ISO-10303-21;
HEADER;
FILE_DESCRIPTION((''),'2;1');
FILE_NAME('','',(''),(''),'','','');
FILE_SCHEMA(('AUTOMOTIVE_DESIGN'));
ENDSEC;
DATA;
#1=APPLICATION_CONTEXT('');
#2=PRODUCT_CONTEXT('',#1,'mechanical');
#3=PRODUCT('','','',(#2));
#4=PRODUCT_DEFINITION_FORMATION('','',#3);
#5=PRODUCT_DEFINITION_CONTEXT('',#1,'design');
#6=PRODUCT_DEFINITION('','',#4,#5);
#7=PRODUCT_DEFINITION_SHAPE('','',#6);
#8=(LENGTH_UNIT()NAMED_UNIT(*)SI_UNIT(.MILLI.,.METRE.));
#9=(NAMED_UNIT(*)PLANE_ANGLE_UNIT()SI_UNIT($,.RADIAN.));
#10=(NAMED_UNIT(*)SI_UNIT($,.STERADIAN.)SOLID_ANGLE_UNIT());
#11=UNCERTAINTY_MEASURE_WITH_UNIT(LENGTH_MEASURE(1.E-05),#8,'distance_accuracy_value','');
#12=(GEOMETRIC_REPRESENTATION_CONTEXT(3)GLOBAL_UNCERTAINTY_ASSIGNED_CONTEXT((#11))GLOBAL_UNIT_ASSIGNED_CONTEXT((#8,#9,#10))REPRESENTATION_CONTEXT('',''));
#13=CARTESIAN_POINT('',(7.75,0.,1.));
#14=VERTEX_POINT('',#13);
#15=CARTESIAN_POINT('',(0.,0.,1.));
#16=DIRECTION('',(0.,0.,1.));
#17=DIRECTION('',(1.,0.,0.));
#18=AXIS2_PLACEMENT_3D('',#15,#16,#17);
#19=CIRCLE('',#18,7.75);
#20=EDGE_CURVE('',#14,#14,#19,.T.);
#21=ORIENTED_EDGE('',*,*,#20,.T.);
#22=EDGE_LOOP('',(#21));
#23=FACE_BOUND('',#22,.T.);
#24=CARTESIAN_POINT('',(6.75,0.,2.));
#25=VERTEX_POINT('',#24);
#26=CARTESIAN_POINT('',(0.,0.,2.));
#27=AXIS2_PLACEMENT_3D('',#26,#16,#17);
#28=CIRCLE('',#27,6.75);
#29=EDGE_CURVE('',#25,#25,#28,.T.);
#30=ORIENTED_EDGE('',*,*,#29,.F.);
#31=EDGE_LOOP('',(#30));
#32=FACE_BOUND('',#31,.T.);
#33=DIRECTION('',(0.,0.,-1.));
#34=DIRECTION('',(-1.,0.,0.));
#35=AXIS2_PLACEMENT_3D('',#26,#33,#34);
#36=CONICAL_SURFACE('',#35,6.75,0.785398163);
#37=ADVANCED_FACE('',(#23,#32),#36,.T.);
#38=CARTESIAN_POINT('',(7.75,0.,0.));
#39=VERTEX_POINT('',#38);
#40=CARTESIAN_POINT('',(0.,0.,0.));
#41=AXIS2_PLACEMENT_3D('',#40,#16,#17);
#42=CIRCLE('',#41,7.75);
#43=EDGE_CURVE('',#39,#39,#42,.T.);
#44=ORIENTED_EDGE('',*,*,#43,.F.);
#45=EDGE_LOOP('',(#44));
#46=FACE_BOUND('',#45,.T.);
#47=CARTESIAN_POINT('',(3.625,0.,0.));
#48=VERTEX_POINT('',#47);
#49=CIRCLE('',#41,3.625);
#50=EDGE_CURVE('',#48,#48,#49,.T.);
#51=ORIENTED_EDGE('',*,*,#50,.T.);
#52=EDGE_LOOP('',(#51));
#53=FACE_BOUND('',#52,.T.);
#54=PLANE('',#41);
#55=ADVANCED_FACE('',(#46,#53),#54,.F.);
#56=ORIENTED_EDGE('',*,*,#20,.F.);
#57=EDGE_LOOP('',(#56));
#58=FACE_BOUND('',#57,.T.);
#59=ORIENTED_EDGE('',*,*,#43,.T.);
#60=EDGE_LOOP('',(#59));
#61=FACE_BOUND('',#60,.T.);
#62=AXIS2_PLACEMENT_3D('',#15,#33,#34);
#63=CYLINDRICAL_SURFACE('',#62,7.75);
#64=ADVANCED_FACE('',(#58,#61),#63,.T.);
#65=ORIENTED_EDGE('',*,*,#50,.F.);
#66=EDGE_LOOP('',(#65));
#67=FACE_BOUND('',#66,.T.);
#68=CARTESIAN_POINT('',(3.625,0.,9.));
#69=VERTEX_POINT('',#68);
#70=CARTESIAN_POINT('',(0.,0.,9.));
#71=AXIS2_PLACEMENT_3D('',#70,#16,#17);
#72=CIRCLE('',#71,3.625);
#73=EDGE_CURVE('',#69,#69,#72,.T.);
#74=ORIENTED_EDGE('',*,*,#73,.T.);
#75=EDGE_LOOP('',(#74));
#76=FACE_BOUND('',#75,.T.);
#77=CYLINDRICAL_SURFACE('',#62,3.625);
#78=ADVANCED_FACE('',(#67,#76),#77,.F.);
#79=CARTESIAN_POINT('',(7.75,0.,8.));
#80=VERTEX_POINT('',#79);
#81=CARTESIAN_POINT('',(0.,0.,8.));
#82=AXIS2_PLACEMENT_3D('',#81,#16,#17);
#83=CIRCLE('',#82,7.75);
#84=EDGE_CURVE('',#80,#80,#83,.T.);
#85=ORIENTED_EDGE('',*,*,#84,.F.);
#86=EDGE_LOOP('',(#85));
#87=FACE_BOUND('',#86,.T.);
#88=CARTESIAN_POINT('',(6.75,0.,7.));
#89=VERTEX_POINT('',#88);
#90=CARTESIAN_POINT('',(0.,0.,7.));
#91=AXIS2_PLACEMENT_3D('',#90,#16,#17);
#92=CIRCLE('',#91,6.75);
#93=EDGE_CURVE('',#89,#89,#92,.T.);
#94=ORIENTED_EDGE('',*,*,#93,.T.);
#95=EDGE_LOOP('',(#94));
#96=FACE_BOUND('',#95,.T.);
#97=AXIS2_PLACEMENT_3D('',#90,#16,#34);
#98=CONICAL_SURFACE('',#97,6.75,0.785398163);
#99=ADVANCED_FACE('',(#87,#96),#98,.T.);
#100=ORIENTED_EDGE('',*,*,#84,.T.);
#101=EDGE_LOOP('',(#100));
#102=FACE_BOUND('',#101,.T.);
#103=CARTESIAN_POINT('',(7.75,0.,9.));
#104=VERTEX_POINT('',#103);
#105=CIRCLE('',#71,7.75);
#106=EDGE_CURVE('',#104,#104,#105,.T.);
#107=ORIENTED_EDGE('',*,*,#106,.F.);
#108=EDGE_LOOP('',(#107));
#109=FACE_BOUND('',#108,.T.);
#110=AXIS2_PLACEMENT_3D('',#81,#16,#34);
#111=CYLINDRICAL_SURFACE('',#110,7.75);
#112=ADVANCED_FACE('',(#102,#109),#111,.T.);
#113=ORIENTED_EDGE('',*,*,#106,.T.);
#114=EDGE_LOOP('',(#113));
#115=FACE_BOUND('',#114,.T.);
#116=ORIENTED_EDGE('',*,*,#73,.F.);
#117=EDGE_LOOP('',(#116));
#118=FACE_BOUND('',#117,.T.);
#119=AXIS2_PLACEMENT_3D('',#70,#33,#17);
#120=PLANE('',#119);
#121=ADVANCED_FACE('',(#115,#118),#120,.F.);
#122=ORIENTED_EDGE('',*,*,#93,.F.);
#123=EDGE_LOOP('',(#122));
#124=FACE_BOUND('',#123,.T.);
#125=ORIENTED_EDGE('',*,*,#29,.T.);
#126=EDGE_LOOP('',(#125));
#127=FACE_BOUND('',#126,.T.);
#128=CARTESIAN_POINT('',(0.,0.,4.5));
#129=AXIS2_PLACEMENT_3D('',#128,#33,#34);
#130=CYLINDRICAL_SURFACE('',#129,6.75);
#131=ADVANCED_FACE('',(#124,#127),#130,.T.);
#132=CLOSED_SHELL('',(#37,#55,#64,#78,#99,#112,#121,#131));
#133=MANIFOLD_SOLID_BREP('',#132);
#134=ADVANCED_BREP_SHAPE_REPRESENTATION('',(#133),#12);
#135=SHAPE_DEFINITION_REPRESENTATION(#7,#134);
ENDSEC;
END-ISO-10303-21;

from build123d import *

# Parameters (mm, degrees)
SKETCH1_R           = 7.75
SKETCH1_R_2         = 3.625
BOSS_EXTRUDE1_DEPTH = 1
SKETCH2_R           = 6.75
SKETCH2_R_2         = 3.625
BOSS_EXTRUDE2_DEPTH = 3.5
CHAMFER1_SIZE       = 1


with BuildPart() as part:
    # Sketch1 → Boss-Extrude1 (new body)
    with BuildSketch(Plane.XY):
        Circle(SKETCH1_R)
        Circle(SKETCH1_R_2, mode=Mode.SUBTRACT)
    extrude(amount=BOSS_EXTRUDE1_DEPTH)

    # Sketch2 → Boss-Extrude2 (add)
    with BuildSketch(Plane.XY.offset(1)):
        Circle(SKETCH2_R)
        Circle(SKETCH2_R_2, mode=Mode.SUBTRACT)
    extrude(amount=BOSS_EXTRUDE2_DEPTH)

    # Chamfer1
    chamfer1_edges = [part.edges().sort_by_distance(p)[0] for p in [
        (-6.75, 0, 1),
    ]]
    chamfer(chamfer1_edges, length=CHAMFER1_SIZE - 0.0001)  # a hair under: the kernel refuses the full size

    # Mirror5: part across plane


with BuildPart() as part_1:
    add(part.part)
    add(part.part.mirror(Plane.XY.offset(4.5)))


solid = part_1.part
